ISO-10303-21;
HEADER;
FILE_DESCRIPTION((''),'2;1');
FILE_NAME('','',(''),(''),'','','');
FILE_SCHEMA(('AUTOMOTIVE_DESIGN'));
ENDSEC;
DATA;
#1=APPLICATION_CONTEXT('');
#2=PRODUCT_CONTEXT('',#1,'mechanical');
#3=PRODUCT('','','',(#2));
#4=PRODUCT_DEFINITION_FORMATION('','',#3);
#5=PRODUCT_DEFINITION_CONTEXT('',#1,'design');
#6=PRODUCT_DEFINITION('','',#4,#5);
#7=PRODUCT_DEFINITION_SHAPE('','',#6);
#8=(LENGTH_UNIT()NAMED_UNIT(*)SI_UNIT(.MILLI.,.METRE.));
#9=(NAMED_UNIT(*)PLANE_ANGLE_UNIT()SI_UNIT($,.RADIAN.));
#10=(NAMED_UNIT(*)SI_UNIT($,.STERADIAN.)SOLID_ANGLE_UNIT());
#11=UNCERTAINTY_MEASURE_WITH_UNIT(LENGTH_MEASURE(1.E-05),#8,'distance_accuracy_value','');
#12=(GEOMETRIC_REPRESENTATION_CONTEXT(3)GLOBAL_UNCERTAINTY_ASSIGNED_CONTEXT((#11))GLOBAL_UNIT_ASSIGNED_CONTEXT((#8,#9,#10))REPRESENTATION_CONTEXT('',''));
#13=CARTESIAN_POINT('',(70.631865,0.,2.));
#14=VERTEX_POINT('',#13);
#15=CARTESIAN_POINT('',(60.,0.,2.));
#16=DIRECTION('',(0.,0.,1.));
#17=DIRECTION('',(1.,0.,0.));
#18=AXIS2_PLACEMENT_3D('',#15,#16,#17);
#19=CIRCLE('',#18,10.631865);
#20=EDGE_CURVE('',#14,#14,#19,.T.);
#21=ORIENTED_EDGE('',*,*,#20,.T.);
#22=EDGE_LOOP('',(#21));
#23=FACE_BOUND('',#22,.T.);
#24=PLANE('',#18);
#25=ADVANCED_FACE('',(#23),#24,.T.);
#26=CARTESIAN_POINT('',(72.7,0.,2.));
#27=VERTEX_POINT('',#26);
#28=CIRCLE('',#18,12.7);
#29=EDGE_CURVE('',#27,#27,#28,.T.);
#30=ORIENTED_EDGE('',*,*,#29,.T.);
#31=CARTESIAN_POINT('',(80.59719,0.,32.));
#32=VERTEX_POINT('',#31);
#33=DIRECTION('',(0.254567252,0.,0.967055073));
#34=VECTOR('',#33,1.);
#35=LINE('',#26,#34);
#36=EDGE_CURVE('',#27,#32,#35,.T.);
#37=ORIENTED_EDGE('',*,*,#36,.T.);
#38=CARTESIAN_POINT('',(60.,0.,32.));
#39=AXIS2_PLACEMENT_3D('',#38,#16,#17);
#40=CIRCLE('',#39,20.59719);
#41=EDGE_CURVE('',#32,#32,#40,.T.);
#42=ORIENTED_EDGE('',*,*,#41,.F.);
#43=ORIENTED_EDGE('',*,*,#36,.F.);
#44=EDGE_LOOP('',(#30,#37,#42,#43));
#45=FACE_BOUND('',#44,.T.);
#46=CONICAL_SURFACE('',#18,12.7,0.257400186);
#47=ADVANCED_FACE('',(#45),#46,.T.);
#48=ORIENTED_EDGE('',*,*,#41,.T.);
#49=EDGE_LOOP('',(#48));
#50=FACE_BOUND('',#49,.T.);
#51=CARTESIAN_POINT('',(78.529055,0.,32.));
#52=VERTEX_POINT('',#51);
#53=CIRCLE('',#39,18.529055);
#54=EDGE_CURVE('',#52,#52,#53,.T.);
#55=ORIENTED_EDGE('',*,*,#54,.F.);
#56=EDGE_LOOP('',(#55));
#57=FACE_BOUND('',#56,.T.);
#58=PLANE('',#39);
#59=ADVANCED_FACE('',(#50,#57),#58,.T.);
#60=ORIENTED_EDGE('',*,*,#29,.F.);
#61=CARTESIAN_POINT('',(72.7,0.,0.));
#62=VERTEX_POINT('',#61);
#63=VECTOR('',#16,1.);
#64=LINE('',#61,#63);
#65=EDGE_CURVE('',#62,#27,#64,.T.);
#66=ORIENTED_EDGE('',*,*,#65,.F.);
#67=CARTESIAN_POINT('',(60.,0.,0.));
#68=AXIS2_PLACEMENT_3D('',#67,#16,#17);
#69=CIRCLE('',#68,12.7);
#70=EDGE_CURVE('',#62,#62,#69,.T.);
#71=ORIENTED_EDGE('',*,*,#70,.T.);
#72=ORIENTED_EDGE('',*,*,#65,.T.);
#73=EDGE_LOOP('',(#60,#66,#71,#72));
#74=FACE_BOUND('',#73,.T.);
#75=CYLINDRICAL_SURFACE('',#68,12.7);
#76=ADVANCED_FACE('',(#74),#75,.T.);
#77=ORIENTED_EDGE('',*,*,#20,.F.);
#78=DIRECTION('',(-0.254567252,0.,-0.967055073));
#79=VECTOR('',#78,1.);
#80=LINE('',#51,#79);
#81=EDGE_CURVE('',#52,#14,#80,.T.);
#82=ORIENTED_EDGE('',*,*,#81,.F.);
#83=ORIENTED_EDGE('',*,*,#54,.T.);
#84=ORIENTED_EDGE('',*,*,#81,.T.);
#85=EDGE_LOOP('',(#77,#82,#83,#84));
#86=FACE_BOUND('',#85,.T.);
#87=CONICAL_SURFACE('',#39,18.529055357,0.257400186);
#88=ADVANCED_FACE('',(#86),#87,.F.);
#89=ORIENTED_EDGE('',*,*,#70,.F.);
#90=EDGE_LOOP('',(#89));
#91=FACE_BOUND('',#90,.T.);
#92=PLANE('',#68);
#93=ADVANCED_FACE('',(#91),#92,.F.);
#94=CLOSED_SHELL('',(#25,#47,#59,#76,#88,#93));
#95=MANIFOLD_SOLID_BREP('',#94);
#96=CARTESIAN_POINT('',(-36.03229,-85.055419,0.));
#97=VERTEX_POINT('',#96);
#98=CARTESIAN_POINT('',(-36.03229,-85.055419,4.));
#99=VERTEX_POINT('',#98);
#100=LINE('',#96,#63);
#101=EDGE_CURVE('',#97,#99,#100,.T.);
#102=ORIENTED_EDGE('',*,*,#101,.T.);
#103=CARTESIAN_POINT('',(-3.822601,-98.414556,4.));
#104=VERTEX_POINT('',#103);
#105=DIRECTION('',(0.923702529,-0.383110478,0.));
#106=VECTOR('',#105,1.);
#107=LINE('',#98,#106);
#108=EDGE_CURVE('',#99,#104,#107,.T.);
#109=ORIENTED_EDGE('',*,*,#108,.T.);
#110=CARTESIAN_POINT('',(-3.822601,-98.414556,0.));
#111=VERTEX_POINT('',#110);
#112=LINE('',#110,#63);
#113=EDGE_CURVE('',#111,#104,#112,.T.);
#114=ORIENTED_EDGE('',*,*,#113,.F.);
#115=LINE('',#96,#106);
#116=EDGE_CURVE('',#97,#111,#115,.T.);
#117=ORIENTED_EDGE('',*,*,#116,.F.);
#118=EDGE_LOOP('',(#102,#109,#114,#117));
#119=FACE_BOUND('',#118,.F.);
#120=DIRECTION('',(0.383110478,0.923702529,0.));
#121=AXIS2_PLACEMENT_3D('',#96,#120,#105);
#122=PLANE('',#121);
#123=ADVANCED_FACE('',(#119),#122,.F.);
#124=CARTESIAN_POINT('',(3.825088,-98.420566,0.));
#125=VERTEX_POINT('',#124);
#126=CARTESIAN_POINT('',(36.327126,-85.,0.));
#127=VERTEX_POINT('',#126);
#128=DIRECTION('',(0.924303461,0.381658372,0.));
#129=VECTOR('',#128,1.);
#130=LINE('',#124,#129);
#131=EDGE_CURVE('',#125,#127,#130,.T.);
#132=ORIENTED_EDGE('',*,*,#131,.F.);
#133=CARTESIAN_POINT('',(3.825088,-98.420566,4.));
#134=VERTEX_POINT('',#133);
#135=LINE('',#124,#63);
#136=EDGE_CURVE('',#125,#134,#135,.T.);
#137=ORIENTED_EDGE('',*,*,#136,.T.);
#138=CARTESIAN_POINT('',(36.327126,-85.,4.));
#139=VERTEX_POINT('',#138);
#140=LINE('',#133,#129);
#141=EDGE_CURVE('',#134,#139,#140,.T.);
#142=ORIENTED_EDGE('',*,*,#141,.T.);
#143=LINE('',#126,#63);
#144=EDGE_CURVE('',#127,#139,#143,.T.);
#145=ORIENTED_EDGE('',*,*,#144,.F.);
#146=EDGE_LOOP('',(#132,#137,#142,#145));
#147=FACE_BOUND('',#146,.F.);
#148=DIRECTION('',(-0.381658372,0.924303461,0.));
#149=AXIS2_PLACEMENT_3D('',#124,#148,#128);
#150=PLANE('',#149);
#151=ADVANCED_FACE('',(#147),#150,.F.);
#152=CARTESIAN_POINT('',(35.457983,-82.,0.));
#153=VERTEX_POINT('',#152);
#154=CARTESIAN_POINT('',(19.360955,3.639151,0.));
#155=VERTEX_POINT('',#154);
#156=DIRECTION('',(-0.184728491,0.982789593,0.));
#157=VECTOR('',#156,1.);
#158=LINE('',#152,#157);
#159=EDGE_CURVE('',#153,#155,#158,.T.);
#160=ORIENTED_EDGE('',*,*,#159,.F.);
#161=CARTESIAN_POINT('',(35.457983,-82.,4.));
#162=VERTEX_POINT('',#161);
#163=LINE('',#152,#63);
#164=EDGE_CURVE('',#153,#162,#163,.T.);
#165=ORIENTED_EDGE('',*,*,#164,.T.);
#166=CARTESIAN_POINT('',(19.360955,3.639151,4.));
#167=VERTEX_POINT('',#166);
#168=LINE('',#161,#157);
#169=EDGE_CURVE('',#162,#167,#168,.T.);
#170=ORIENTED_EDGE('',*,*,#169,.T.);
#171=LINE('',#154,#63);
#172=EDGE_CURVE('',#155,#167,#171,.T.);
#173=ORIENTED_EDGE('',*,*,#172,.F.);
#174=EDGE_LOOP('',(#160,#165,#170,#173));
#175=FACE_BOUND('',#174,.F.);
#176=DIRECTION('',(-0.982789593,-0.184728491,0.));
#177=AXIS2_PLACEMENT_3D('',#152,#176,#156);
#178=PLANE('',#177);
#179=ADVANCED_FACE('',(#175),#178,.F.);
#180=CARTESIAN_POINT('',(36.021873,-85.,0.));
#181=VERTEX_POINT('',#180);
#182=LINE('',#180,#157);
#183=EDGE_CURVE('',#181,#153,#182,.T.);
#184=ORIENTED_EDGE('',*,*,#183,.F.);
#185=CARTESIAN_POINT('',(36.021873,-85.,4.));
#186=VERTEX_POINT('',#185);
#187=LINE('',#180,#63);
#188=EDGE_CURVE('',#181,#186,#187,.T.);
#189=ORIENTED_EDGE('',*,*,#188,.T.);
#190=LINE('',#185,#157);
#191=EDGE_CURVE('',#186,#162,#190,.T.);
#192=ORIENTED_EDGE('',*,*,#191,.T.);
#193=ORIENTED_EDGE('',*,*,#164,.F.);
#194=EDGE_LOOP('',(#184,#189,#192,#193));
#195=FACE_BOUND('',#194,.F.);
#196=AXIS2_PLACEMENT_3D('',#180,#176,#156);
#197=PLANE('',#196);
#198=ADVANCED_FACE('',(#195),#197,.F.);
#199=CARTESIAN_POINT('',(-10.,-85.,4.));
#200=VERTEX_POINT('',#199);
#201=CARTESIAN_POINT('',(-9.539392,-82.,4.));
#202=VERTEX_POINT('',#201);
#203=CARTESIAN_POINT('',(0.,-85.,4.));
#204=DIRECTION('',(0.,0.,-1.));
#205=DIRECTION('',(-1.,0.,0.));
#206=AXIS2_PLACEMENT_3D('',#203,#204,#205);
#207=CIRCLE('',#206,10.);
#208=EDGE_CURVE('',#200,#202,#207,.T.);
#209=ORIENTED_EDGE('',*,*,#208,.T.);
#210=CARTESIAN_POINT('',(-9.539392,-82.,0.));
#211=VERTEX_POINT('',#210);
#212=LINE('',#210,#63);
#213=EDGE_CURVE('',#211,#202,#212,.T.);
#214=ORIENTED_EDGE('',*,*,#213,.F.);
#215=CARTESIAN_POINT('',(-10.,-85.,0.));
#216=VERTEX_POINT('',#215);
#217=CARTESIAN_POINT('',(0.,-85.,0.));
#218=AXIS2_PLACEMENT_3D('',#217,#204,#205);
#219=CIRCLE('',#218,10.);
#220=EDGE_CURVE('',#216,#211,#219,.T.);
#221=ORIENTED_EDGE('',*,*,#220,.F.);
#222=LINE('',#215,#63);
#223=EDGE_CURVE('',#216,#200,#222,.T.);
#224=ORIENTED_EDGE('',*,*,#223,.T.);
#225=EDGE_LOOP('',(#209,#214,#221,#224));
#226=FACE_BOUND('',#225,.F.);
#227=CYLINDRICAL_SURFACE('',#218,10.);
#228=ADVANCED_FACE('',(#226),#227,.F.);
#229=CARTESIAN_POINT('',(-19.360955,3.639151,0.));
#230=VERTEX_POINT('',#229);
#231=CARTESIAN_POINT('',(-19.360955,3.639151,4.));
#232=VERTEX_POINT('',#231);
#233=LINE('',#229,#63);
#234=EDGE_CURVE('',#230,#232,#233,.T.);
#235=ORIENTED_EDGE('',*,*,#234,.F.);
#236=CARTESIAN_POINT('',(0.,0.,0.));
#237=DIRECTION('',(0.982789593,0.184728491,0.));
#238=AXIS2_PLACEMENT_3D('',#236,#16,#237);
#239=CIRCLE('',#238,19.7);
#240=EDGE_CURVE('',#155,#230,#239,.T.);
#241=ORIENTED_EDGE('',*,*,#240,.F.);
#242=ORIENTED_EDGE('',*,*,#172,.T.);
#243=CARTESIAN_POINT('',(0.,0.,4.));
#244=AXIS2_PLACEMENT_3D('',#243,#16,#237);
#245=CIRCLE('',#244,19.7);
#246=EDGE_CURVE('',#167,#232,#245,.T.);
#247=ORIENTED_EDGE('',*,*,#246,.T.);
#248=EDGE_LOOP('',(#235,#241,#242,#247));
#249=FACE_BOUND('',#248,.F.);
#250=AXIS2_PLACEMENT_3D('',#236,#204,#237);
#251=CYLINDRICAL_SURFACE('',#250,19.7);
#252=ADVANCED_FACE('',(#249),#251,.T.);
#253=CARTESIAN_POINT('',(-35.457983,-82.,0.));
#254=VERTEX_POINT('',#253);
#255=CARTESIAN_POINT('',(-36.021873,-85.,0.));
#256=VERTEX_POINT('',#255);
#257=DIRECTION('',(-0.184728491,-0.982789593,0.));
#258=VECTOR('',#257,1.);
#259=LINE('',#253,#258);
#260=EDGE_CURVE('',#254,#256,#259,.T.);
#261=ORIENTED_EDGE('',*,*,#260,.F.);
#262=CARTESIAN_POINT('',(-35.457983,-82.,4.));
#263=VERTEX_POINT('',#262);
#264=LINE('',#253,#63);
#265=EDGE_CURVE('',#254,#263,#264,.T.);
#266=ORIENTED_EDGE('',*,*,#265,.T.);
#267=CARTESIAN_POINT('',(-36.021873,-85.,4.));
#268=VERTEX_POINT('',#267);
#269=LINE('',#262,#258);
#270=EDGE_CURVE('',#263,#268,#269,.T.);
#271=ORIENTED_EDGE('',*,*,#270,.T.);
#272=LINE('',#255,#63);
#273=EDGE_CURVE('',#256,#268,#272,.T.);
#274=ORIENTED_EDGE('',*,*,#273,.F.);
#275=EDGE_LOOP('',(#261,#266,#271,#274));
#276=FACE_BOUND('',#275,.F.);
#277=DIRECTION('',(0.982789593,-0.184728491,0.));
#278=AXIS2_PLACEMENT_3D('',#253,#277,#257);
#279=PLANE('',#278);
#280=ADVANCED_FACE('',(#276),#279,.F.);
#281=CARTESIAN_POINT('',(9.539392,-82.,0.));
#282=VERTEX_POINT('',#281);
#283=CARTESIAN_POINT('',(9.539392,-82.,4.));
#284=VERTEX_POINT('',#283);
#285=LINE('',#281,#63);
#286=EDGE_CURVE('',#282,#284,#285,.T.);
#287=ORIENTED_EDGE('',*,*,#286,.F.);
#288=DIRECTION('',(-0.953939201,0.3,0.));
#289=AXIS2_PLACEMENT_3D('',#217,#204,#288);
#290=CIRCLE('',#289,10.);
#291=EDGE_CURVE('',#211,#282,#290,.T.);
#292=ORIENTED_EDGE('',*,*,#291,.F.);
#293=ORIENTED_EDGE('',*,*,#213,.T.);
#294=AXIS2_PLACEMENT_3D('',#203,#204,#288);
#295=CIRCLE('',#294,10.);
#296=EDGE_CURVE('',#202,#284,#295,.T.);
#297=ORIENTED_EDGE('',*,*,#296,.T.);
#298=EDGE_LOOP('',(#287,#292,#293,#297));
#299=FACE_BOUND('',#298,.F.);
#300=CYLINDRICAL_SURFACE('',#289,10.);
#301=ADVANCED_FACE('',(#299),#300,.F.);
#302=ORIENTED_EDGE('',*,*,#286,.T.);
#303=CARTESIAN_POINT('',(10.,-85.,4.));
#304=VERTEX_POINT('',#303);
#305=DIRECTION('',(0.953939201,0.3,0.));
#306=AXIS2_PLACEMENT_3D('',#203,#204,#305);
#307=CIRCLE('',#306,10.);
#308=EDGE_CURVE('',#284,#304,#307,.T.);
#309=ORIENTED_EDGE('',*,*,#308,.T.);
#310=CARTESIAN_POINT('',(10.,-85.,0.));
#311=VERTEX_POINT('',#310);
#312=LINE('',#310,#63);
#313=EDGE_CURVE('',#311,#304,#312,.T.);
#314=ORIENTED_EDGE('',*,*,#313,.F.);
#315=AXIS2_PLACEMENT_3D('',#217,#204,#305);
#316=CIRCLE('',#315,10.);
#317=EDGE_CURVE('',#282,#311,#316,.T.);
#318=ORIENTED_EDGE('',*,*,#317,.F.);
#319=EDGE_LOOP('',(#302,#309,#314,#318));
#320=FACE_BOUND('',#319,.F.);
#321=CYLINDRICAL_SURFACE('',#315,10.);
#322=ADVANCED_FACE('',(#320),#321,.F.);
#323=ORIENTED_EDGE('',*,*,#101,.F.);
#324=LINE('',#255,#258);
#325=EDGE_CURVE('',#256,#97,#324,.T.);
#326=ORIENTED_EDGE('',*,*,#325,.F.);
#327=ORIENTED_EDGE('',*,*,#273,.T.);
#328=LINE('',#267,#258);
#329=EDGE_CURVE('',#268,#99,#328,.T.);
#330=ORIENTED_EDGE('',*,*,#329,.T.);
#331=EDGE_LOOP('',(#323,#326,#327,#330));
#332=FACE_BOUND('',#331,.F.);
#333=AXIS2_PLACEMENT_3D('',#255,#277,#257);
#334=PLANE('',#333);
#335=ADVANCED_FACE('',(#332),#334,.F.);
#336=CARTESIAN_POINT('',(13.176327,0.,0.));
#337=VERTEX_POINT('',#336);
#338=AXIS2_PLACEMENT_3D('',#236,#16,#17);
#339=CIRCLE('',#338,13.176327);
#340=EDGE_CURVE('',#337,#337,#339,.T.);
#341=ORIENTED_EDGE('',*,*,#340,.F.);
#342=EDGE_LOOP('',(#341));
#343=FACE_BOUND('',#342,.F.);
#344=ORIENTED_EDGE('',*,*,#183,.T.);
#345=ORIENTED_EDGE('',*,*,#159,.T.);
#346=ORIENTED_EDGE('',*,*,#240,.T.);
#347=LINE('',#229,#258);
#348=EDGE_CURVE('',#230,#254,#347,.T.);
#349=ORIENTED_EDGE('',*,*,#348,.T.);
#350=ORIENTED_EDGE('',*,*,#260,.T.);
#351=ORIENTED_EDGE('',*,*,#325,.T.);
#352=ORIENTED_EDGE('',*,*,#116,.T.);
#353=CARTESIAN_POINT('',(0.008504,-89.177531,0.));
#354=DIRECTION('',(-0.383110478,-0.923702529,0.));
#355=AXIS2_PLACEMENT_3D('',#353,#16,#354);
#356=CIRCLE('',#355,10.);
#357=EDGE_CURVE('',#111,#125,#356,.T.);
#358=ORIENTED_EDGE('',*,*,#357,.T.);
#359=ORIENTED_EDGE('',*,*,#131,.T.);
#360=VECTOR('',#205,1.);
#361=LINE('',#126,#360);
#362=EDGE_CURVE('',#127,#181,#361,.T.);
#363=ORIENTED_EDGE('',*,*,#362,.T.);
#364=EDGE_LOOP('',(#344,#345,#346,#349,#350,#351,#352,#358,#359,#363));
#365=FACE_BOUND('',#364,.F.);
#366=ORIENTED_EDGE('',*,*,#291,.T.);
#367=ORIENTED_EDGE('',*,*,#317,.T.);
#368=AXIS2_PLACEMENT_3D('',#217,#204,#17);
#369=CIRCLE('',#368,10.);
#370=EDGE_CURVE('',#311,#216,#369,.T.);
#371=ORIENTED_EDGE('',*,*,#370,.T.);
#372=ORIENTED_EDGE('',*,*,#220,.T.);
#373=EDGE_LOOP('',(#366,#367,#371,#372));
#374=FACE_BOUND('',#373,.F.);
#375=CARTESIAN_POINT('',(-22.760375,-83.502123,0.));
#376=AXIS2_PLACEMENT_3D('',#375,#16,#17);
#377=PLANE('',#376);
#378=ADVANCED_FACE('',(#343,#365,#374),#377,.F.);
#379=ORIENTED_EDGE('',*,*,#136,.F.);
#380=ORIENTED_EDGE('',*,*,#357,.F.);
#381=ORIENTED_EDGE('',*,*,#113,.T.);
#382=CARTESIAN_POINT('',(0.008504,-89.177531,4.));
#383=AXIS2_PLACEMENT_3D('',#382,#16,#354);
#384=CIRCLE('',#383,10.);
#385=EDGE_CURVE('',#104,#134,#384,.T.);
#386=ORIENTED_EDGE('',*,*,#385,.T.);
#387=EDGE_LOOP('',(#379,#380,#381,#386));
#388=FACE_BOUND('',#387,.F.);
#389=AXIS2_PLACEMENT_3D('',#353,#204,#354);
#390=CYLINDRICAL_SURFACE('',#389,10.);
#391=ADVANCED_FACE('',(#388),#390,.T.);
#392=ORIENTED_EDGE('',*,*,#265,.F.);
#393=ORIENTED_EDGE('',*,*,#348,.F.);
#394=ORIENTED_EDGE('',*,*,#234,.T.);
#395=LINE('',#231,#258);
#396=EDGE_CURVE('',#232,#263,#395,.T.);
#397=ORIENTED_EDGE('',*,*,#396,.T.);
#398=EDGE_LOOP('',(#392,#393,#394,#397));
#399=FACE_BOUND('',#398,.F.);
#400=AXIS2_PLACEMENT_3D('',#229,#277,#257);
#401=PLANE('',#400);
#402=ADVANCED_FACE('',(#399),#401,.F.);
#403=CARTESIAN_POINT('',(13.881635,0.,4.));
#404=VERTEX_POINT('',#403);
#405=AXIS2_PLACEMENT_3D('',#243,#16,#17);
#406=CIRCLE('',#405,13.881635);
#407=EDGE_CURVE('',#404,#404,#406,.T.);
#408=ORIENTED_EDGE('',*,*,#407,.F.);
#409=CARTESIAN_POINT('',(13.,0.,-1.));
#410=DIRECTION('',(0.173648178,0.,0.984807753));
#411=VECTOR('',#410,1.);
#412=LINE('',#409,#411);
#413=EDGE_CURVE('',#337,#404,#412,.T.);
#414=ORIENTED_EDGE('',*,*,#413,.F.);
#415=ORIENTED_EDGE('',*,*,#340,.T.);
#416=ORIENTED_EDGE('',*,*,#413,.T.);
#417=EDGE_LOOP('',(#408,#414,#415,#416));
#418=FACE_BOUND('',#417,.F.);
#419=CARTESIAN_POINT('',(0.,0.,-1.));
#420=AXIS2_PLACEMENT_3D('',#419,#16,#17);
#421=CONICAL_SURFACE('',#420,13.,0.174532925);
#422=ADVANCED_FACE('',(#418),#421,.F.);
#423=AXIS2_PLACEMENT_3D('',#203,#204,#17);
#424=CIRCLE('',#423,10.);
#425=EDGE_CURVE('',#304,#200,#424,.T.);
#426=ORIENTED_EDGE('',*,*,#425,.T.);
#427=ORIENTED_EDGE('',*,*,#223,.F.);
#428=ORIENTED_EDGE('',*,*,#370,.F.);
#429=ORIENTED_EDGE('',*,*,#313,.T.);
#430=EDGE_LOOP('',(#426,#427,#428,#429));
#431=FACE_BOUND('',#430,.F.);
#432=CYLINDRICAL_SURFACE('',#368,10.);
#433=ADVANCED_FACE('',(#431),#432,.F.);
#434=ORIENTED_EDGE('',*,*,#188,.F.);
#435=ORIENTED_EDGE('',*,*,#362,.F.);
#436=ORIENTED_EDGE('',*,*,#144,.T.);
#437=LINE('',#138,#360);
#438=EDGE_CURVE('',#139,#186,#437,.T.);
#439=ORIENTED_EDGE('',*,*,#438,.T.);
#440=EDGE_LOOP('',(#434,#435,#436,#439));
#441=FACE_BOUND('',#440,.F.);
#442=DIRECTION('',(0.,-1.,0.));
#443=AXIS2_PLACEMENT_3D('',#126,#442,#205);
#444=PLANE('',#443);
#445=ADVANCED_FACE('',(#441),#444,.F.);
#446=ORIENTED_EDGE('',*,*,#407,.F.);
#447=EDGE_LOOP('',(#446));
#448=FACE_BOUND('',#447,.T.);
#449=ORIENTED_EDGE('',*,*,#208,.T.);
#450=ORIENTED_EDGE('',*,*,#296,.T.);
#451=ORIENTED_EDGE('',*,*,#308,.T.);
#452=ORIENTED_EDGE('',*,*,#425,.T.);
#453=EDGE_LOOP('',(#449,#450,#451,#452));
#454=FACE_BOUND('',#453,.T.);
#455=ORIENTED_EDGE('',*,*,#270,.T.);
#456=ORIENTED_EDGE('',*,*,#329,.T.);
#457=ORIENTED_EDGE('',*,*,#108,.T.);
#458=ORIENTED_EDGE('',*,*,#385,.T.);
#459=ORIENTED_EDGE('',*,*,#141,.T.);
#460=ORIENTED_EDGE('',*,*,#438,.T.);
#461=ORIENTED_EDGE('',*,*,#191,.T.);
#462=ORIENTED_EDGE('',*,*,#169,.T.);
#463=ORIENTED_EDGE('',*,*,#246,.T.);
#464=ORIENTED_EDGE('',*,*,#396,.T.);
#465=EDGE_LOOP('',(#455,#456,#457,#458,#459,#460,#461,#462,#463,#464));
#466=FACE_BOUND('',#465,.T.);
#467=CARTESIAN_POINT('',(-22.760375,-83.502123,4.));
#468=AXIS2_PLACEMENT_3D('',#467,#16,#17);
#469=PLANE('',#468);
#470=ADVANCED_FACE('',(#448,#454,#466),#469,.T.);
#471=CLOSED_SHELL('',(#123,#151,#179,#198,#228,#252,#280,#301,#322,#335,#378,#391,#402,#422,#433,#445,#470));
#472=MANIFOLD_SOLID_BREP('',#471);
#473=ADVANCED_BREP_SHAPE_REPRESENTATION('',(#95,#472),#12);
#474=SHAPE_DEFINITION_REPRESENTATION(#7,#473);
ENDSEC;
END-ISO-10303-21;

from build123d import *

# Parameters (mm, degrees)
F0_R     = 13
F1_DEPTH = 4


# Not quite as in the source:
# - a fillet or chamfer that OpenCascade refuses, or shapes differently, is made with other operations: its cross-section is extruded or revolved along the edge and cut away or added


with BuildPart() as f1:
    # F0 (on Top) → F1 (new body)
    with BuildSketch(Plane.XY):
        with BuildLine():
            Line((-36.0218728627, -85), (-10, -85))
            ThreePointArc((-10, -85), (-9.8841772582, -83.4824230072), (-9.5393920142, -82))
            Line((-9.5393920142, -82), (-35.4579826076, -82))
            Line((-35.4579826076, -82), (-36.0218728627, -85))
        make_face()
        with BuildLine():
            Line((10, -85), (36.0218728627, -85))
            Line((36.0218728627, -85), (35.4579826076, -82))
            Line((35.4579826076, -82), (9.5393920142, -82))
            ThreePointArc((9.5393920142, -82), (9.8841772582, -83.4824230072), (10, -85))
        make_face()
        with BuildLine():
            Line((9.5393920142, -82), (35.4579826076, -82))
            Line((35.4579826076, -82), (19.3609549854, 3.6391512822))
            ThreePointArc((19.3609549854, 3.6391512822), (0, 19.7), (-19.3609549854, 3.6391512822))
            Line((-19.3609549854, 3.6391512822), (-35.4579826076, -82))
            Line((-35.4579826076, -82), (-9.5393920142, -82))
            ThreePointArc((-9.5393920142, -82), (0, -75), (9.5393920142, -82))
        make_face()
        Circle(F0_R, mode=Mode.SUBTRACT)
        with BuildLine():
            Line((3.8250876827, -98.4205655408), (36.3271264003, -85))
            Line((36.3271264003, -85), (36.0218728627, -85))
            Line((36.0218728627, -85), (10, -85))
            ThreePointArc((10, -85), (0, -95), (-10, -85))
            Line((-10, -85), (-36.0218728627, -85))
            Line((-36.0218728627, -85), (-36.0322895223, -85.0554185474))
            Line((-36.0322895223, -85.0554185474), (-3.822600818, -98.4145562205))
            ThreePointArc((-3.822600818, -98.4145562205), (0.0006462735, -99.1775278473), (3.8250876827, -98.4205655408))
        make_face()
    extrude(amount=F1_DEPTH)

    # F4: chamfer of 5 x 0.8816349035 on 1 edges, made by hand

    # F4_s1 → F4_t2 (revolve, cut)
    with BuildSketch(Plane.XZ):
        Polygon((13, -1), (13.8816349035, 4), (13, 4), align=None)
    revolve(axis=Axis((0, 0, 4), (0, 0, 1)), mode=Mode.SUBTRACT)


with BuildPart() as f3:
    # F2 (on Front) → F3 (revolve)
    with BuildSketch(Plane.XZ):
        Polygon((60, 2), (60, 0), (72.7, 0), (72.7, 2), (80.5971898989, 32), (78.5290553575, 32), (70.6318654586, 2), align=None)
    revolve(axis=Axis((60, 0, 12.6420042982), (0, 0, 1)))


solid = Compound([f1.part, f3.part])
